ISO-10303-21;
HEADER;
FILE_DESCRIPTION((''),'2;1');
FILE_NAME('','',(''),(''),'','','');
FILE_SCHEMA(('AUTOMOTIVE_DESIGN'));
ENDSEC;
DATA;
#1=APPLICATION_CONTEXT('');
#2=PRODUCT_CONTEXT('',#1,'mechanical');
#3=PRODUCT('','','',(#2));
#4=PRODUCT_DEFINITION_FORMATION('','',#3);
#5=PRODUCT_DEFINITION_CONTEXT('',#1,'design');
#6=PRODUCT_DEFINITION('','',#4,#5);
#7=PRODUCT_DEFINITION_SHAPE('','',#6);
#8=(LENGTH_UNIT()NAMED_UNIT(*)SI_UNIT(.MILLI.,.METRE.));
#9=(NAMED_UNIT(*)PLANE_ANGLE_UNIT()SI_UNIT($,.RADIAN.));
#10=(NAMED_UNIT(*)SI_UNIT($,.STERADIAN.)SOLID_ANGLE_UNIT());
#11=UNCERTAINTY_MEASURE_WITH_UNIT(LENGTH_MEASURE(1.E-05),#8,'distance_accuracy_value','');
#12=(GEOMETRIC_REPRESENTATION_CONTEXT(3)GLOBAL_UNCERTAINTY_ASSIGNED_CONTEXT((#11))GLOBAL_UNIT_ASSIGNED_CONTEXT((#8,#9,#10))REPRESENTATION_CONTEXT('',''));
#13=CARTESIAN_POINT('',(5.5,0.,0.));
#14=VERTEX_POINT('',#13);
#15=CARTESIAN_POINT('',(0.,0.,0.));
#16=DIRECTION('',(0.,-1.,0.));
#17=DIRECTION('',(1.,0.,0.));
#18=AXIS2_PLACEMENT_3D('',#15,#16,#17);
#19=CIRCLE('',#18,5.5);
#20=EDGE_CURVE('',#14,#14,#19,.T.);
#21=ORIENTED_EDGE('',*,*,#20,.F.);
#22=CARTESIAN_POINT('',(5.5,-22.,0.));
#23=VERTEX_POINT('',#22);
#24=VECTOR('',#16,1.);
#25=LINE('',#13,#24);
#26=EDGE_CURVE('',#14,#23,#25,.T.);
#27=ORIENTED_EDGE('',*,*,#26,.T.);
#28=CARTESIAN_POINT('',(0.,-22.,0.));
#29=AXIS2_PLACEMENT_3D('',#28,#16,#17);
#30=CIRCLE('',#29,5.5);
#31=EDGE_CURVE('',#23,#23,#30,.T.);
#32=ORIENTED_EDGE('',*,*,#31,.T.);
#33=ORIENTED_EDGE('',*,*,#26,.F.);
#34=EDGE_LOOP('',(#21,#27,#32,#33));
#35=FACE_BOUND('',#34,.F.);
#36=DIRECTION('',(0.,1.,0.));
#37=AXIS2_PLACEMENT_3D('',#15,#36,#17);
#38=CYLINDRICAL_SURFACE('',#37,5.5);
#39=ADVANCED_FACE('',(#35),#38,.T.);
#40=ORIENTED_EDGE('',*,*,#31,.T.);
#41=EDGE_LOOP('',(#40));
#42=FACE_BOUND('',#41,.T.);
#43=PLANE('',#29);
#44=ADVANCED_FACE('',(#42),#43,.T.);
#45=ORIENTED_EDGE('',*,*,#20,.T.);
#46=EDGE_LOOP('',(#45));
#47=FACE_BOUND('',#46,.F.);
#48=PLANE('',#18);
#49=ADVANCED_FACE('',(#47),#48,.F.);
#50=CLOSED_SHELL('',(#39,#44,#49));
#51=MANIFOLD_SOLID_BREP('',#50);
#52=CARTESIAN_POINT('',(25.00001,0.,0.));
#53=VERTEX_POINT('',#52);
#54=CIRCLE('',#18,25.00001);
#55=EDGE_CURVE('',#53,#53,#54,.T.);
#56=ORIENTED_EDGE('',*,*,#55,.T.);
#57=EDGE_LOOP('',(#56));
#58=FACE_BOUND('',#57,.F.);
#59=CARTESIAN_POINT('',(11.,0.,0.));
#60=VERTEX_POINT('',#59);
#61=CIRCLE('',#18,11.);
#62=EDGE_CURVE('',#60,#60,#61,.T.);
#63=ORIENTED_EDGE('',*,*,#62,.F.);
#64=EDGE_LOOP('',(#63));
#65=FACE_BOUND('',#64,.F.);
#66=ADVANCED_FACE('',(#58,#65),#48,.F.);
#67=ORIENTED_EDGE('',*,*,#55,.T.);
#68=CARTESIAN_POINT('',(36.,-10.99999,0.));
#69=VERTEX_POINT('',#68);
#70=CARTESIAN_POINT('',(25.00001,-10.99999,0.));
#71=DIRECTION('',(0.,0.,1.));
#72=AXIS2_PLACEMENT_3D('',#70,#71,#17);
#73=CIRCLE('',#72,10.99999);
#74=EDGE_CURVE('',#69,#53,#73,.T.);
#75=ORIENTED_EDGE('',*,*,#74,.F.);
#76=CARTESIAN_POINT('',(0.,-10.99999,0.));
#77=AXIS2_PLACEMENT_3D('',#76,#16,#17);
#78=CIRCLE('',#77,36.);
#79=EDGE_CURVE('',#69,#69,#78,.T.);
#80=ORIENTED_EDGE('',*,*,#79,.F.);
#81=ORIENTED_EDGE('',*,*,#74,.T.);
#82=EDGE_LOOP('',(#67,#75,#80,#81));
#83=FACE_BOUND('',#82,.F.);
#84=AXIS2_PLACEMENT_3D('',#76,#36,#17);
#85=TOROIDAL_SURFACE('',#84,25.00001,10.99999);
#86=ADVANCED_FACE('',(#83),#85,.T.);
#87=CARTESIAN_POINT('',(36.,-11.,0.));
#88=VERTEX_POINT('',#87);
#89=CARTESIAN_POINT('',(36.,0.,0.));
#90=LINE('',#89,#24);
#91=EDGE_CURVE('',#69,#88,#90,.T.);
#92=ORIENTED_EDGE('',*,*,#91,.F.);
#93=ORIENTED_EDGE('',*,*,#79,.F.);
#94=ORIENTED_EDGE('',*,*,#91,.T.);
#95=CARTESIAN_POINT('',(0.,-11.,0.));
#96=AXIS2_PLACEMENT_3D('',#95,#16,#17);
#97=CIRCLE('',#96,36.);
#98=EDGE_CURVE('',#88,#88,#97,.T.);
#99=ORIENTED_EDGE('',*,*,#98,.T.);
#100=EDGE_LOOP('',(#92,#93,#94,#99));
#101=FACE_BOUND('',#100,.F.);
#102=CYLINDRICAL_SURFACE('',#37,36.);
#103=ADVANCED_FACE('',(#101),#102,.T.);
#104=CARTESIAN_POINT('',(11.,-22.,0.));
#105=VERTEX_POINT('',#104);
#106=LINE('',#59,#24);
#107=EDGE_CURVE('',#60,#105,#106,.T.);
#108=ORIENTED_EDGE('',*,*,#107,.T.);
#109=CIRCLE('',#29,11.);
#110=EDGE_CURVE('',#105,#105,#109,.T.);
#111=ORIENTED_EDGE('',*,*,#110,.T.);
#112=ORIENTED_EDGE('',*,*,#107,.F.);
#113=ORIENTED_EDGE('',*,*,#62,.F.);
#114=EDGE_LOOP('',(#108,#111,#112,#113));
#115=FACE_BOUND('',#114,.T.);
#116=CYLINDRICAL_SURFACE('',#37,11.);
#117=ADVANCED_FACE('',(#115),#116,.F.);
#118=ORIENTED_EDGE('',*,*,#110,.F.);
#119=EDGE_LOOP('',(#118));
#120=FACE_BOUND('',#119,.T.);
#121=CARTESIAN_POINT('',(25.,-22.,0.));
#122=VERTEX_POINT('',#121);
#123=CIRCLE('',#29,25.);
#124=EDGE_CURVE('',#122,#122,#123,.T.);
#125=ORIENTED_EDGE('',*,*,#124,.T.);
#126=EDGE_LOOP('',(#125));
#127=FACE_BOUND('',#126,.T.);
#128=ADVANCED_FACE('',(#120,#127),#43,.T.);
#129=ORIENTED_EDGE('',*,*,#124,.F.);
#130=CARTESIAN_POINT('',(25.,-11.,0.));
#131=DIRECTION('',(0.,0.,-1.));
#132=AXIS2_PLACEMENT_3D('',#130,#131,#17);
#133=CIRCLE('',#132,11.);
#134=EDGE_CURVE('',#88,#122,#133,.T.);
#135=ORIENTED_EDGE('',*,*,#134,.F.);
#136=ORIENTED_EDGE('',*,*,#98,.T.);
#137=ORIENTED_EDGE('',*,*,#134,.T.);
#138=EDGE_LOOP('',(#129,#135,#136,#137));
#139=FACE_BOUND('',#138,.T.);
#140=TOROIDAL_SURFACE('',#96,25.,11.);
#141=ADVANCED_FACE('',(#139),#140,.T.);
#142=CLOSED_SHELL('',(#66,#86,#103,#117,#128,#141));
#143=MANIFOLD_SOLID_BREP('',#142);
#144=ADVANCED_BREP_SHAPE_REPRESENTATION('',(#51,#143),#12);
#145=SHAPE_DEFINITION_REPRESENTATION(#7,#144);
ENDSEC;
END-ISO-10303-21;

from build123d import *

# Parameters (mm, degrees)
F0_R     = 5.5
F1_DEPTH = 22
F0_R_2   = 36
F0_R_3   = 11
F2_R     = 11
F3_R     = 10.99999


# Not quite as in the source:
# - a fillet or chamfer is up to 0.001 mm smaller than in the source, because OpenCascade refuses the exact size


with BuildPart() as f1:
    # F0 (on Front) → F1 (new body)
    with BuildSketch(Plane.XZ):
        Circle(F0_R)
    extrude(amount=F1_DEPTH)


with BuildPart() as f1b:
    # F0 (on Front) → F1, piece 2 (new body)
    with BuildSketch(Plane.XZ):
        Circle(F0_R_2)
        Circle(F0_R_3, mode=Mode.SUBTRACT)
    extrude(amount=F1_DEPTH)

    # F2
    f2_edges = [f1b.edges().sort_by_distance(p)[0] for p in [
        (-36, -22, 0),
    ]]
    fillet(f2_edges, radius=F2_R)

    # F3 (radius 11 in the source; OpenCascade refuses exactly that, so slightly less here)
    f3_edges = [f1b.edges().sort_by_distance(p)[0] for p in [
        (-36, 0, 0),
    ]]
    fillet(f3_edges, radius=F3_R)


solid = Compound([f1.part, f1b.part])
